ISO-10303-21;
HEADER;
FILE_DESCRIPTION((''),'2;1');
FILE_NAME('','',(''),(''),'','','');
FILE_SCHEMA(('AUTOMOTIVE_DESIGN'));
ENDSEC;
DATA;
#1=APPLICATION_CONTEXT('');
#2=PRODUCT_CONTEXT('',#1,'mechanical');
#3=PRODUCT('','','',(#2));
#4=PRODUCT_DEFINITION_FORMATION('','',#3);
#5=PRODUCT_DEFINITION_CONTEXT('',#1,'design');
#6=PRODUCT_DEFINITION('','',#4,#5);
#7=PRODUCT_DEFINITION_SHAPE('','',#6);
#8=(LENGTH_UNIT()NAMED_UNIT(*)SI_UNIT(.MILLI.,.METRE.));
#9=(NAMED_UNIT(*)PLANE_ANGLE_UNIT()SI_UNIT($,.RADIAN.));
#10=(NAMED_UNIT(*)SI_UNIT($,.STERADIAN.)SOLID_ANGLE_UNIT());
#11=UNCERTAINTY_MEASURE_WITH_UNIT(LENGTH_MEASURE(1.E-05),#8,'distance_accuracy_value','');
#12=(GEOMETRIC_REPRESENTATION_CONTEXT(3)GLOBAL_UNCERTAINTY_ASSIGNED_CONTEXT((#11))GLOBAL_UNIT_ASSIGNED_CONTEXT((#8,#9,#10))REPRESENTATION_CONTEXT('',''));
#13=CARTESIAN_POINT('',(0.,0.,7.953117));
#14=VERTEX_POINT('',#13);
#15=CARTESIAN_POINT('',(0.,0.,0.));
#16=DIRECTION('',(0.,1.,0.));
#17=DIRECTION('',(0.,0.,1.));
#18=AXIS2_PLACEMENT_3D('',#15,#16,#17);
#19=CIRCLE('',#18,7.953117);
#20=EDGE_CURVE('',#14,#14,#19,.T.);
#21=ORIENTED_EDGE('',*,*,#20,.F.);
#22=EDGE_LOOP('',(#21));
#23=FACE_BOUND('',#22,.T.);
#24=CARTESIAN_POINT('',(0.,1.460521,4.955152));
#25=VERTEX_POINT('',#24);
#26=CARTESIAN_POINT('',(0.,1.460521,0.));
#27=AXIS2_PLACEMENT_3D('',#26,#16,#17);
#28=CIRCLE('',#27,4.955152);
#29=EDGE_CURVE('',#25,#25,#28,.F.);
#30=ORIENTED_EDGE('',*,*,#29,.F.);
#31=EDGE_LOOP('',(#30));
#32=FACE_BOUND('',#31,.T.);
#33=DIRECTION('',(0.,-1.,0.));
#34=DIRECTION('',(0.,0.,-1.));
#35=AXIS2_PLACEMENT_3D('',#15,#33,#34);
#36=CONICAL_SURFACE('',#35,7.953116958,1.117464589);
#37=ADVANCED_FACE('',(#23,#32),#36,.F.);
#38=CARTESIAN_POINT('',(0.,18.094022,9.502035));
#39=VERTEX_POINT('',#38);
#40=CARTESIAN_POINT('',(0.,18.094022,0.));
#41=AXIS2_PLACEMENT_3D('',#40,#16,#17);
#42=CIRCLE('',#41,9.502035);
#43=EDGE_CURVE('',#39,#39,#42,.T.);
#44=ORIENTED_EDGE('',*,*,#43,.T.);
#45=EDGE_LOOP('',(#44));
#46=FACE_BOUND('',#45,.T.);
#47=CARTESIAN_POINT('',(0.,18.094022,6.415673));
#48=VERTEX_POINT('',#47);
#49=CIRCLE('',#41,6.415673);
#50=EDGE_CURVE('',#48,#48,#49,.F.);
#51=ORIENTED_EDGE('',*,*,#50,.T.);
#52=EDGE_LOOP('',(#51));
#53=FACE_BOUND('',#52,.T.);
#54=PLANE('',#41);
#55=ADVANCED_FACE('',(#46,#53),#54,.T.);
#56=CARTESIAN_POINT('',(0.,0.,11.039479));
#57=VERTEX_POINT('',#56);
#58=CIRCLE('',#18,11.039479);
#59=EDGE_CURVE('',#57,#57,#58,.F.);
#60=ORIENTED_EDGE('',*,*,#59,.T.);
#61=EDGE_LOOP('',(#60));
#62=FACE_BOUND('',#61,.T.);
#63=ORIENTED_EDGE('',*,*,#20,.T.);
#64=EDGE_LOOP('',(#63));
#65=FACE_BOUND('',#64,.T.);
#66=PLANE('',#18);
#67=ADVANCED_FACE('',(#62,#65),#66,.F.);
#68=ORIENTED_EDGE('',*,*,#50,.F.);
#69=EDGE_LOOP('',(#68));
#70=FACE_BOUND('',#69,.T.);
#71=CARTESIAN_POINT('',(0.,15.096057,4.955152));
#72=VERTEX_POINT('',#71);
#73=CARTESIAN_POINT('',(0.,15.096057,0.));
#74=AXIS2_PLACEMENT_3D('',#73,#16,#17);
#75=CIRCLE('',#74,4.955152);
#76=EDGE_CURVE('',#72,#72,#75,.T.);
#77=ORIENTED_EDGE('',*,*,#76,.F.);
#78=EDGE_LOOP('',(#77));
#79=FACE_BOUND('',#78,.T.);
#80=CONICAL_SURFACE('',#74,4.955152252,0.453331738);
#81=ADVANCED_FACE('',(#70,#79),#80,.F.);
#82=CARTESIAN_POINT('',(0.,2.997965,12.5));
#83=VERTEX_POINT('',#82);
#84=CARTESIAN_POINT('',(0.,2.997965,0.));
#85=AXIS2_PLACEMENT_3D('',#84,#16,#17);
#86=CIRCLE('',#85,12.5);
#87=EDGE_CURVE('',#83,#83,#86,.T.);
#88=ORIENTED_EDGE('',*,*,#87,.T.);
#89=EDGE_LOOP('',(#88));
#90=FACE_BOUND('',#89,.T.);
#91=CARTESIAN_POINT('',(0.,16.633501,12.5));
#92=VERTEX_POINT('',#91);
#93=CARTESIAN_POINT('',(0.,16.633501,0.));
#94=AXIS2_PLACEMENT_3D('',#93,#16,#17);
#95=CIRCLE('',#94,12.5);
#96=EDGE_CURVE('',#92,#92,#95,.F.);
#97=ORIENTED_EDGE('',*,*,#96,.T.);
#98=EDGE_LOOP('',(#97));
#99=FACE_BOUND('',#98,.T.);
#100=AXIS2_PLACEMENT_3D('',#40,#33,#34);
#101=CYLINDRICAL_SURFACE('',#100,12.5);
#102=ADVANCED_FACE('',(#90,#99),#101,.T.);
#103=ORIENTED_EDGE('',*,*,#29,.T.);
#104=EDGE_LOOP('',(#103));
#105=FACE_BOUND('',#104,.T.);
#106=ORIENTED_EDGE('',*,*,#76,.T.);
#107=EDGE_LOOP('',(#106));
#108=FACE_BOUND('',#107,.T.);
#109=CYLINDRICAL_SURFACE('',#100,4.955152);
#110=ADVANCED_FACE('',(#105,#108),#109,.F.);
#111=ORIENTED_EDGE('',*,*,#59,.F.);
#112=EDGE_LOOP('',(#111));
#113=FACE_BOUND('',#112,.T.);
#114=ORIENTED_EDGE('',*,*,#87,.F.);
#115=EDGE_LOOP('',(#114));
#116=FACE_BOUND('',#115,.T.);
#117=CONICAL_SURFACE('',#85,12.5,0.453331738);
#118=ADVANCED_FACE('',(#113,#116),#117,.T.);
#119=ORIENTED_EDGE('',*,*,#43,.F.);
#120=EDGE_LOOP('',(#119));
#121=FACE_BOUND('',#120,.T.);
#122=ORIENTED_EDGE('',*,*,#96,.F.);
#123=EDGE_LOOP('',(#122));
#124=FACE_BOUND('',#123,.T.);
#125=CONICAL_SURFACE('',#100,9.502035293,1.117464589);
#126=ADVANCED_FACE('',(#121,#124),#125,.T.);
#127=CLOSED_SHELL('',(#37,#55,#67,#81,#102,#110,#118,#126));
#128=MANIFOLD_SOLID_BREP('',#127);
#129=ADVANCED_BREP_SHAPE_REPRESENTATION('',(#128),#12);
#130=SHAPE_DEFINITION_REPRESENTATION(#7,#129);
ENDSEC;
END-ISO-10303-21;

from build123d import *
from OCP.BRepFilletAPI import BRepFilletAPI_MakeChamfer

# Parameters (mm, degrees)
SKETCH1_R           = 12.5
BOSS_EXTRUDE1_DEPTH = 18.094022058
SKETCH2_R           = 4.955152252
CUT_EXTRUDE1_DEPTH  = 26.296118956
CHAMFER1_SIZE       = 1.460521096
CHAMFER1_SIZE2      = 2.997964707


with BuildPart() as part:
    # Sketch1 → Boss-Extrude1 (new body)
    with BuildSketch(Plane(origin=(0, 0, 0), x_dir=(1, 0, 0), z_dir=(0, 1, 0))):
        Circle(SKETCH1_R)
    extrude(amount=BOSS_EXTRUDE1_DEPTH)

    # Sketch2 → Cut-Extrude1 (cut, through all)
    with BuildSketch(Plane(origin=(0, 0, 0), x_dir=(1, 0, 0), z_dir=(0, 1, 0))):
        Circle(SKETCH2_R)
    extrude(amount=CUT_EXTRUDE1_DEPTH, mode=Mode.SUBTRACT)

    # Chamfer1: one chamfer whose edges measure the first distance from different faces: ONE call of the kernel's chamfer builder (chamfer() names one face for all edges)
    chamfer1_edges_1 = [part.edges().sort_by_distance(p)[0] for p in [
        (-4.955152252, 18.094022058, 0),
    ]]
    chamfer1_side_1 = [part.faces().sort_by_distance(p)[0] for p in [
        (-12.146446609, 18.094022058, 0),
    ]]
    chamfer1_edges_2 = [part.edges().sort_by_distance(p)[0] for p in [
        (-4.955152252, 0, 0),
    ]]
    chamfer1_side_2 = [part.faces().sort_by_distance(p)[0] for p in [
        (-4.955152252, 9.047011029, 0),
    ]]
    chamfer1_edges_3 = [part.edges().sort_by_distance(p)[0] for p in [
        (-12.5, 0, 0),
    ]]
    chamfer1_side_3 = [part.faces().sort_by_distance(p)[0] for p in [
        (-12.146446609, 0, 0),
    ]]
    chamfer1_edges_4 = [part.edges().sort_by_distance(p)[0] for p in [
        (-12.5, 18.094022058, 0),
    ]]
    chamfer1_side_4 = [part.faces().sort_by_distance(p)[0] for p in [
        (-12.5, 9.047011029, 0),
    ]]
    chamfer1 = BRepFilletAPI_MakeChamfer(part.part.solid().wrapped)
    for e in chamfer1_edges_1:
        chamfer1.Add(CHAMFER1_SIZE, CHAMFER1_SIZE2, e.wrapped, chamfer1_side_1[0].wrapped)  # the first distance lies on this face
    for e in chamfer1_edges_2:
        chamfer1.Add(CHAMFER1_SIZE, CHAMFER1_SIZE2, e.wrapped, chamfer1_side_2[0].wrapped)  # the first distance lies on this face
    for e in chamfer1_edges_3:
        chamfer1.Add(CHAMFER1_SIZE, CHAMFER1_SIZE2, e.wrapped, chamfer1_side_3[0].wrapped)  # the first distance lies on this face
    for e in chamfer1_edges_4:
        chamfer1.Add(CHAMFER1_SIZE, CHAMFER1_SIZE2, e.wrapped, chamfer1_side_4[0].wrapped)  # the first distance lies on this face
    add(Compound.cast(chamfer1.Shape()), mode=Mode.REPLACE)


solid = part.part
